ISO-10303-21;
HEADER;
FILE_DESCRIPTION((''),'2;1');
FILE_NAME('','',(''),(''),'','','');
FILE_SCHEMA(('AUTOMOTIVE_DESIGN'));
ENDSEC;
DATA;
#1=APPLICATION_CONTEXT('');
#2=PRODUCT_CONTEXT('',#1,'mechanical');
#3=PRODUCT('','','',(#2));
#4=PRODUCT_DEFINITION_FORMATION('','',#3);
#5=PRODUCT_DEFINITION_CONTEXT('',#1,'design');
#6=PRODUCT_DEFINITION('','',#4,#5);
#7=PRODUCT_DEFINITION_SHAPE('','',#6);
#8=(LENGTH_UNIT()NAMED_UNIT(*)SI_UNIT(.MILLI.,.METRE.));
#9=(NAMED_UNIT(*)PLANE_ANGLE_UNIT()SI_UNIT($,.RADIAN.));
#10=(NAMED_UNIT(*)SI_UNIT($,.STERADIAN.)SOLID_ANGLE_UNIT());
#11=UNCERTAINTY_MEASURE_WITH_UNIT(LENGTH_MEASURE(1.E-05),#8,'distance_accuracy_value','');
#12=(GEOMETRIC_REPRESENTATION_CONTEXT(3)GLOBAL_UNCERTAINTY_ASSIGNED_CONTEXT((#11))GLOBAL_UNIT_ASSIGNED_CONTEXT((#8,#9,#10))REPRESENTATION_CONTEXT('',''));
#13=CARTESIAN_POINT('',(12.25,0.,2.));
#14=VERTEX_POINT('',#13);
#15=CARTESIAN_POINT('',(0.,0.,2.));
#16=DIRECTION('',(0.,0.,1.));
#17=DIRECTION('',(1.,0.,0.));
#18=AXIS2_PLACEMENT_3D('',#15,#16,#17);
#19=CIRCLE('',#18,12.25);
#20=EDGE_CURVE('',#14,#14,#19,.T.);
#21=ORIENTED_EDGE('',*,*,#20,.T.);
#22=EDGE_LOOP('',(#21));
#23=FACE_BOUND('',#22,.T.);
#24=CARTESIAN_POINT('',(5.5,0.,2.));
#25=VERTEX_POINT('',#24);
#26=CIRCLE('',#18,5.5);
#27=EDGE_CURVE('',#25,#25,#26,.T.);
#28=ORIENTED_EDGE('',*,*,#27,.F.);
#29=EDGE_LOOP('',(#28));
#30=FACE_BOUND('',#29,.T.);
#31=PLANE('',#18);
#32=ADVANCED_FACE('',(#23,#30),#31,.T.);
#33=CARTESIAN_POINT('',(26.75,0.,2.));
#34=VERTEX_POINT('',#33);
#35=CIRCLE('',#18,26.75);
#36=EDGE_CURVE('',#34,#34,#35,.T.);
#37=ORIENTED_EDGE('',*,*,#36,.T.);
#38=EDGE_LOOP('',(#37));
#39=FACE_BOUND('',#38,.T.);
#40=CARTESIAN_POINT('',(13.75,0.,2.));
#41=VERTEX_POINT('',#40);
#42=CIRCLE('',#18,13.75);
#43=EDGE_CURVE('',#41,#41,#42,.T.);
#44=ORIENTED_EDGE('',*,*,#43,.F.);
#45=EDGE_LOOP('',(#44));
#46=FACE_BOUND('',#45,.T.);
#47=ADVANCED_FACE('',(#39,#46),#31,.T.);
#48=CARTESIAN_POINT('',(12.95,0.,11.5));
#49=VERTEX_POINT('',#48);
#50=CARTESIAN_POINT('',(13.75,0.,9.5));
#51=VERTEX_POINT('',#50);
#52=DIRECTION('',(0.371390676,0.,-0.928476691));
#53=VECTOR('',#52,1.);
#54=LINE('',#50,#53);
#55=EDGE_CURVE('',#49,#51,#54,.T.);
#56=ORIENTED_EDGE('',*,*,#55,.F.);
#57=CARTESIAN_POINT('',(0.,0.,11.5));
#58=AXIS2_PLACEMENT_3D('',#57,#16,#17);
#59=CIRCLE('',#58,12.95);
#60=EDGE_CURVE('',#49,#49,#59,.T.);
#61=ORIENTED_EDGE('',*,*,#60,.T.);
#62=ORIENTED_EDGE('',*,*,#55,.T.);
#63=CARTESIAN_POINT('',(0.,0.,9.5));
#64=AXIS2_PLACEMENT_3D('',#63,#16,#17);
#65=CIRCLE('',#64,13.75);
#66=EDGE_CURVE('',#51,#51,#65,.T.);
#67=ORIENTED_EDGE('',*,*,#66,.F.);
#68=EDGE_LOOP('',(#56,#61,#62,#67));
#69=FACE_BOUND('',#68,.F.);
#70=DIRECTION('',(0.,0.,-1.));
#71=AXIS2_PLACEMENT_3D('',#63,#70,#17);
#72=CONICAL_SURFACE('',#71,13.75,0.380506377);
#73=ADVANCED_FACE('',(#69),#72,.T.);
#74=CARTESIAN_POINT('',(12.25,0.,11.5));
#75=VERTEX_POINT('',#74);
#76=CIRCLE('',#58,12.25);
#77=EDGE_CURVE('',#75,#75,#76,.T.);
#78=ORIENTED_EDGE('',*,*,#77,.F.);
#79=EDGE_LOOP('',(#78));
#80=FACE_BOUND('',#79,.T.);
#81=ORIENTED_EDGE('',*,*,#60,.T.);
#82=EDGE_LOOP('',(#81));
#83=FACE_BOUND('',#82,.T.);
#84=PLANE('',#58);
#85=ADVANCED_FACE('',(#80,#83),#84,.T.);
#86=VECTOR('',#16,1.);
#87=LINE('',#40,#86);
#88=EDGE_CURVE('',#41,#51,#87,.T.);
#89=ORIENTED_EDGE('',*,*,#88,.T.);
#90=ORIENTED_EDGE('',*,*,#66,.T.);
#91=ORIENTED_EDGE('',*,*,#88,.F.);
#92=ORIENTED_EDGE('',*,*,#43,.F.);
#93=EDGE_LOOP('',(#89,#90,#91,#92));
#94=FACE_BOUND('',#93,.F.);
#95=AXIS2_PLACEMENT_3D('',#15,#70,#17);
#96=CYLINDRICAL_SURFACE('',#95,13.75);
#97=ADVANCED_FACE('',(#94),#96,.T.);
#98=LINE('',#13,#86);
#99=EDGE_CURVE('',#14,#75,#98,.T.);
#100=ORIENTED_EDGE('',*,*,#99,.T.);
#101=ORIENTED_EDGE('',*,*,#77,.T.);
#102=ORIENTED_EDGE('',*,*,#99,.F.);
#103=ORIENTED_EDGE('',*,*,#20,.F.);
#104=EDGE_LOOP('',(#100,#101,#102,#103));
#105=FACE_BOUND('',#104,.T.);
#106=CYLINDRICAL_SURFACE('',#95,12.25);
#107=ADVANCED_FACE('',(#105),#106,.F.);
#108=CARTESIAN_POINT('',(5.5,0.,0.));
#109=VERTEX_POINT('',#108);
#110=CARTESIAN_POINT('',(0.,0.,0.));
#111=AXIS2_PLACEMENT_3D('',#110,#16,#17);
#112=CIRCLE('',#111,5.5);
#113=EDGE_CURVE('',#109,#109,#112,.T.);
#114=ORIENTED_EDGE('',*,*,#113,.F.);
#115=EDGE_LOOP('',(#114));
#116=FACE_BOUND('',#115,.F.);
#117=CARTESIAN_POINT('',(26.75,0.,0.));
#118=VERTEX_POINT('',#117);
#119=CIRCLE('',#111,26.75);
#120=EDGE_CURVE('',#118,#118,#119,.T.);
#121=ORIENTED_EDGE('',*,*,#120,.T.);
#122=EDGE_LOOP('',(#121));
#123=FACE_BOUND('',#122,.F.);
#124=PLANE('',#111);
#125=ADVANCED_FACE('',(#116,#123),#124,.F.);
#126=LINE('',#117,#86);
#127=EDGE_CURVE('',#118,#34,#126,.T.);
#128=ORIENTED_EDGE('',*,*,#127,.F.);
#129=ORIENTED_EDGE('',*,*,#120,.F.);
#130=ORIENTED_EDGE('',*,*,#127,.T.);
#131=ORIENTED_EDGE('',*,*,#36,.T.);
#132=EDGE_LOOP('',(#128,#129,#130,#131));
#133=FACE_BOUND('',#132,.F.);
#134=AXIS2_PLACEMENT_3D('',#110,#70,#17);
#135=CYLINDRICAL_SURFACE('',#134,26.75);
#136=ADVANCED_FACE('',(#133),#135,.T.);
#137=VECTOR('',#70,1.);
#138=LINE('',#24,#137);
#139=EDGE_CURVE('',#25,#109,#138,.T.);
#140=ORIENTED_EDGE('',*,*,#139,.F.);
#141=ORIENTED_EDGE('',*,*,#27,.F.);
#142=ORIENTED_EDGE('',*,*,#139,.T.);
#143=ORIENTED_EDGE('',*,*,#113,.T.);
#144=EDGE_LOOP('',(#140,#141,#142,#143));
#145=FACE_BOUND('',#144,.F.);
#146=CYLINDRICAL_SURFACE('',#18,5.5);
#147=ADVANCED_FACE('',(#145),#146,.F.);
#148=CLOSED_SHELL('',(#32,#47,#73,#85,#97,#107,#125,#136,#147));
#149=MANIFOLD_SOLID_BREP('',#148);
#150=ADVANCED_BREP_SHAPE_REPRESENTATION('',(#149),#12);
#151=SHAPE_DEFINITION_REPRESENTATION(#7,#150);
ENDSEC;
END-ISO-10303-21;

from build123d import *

# Parameters (mm, degrees)
F0_R     = 26.75
F1_DEPTH = 2
F2_R     = 13.75
F2_R_2   = 12.25
F3_DEPTH = 9.5
F4_SIZE2 = 2
F4_SIZE  = 0.8
F5_R     = 5.5
F6_DEPTH = 25


# Not quite as in the source:
# - a feature of the source that left no trace in its solid (it failed there, or was rolled back) is left out


with BuildPart() as f1:
    # F0 (on Top) → F1 (new body)
    with BuildSketch(Plane.XY):
        Circle(F0_R)
    extrude(amount=F1_DEPTH)

    # F2 (on face) → F3 (join)
    with BuildSketch(Plane.XY.offset(2)):
        Circle(F2_R)
        Circle(F2_R_2, mode=Mode.SUBTRACT)
    extrude(amount=F3_DEPTH)

    # F4
    f4_edges = [f1.edges().sort_by_distance(p)[0] for p in [
        (-13.75, 0, 11.5),
    ]]
    f4_side = f1.faces().sort_by_distance((-13.361091, 0, 11.5))[0]
    chamfer(f4_edges, length=F4_SIZE, length2=F4_SIZE2, reference=f4_side)

    # F5 (on face) → F6 (cut)
    with BuildSketch(Plane.XY.offset(2)):
        Circle(F5_R)
    extrude(amount=-F6_DEPTH, mode=Mode.SUBTRACT)


solid = f1.part
